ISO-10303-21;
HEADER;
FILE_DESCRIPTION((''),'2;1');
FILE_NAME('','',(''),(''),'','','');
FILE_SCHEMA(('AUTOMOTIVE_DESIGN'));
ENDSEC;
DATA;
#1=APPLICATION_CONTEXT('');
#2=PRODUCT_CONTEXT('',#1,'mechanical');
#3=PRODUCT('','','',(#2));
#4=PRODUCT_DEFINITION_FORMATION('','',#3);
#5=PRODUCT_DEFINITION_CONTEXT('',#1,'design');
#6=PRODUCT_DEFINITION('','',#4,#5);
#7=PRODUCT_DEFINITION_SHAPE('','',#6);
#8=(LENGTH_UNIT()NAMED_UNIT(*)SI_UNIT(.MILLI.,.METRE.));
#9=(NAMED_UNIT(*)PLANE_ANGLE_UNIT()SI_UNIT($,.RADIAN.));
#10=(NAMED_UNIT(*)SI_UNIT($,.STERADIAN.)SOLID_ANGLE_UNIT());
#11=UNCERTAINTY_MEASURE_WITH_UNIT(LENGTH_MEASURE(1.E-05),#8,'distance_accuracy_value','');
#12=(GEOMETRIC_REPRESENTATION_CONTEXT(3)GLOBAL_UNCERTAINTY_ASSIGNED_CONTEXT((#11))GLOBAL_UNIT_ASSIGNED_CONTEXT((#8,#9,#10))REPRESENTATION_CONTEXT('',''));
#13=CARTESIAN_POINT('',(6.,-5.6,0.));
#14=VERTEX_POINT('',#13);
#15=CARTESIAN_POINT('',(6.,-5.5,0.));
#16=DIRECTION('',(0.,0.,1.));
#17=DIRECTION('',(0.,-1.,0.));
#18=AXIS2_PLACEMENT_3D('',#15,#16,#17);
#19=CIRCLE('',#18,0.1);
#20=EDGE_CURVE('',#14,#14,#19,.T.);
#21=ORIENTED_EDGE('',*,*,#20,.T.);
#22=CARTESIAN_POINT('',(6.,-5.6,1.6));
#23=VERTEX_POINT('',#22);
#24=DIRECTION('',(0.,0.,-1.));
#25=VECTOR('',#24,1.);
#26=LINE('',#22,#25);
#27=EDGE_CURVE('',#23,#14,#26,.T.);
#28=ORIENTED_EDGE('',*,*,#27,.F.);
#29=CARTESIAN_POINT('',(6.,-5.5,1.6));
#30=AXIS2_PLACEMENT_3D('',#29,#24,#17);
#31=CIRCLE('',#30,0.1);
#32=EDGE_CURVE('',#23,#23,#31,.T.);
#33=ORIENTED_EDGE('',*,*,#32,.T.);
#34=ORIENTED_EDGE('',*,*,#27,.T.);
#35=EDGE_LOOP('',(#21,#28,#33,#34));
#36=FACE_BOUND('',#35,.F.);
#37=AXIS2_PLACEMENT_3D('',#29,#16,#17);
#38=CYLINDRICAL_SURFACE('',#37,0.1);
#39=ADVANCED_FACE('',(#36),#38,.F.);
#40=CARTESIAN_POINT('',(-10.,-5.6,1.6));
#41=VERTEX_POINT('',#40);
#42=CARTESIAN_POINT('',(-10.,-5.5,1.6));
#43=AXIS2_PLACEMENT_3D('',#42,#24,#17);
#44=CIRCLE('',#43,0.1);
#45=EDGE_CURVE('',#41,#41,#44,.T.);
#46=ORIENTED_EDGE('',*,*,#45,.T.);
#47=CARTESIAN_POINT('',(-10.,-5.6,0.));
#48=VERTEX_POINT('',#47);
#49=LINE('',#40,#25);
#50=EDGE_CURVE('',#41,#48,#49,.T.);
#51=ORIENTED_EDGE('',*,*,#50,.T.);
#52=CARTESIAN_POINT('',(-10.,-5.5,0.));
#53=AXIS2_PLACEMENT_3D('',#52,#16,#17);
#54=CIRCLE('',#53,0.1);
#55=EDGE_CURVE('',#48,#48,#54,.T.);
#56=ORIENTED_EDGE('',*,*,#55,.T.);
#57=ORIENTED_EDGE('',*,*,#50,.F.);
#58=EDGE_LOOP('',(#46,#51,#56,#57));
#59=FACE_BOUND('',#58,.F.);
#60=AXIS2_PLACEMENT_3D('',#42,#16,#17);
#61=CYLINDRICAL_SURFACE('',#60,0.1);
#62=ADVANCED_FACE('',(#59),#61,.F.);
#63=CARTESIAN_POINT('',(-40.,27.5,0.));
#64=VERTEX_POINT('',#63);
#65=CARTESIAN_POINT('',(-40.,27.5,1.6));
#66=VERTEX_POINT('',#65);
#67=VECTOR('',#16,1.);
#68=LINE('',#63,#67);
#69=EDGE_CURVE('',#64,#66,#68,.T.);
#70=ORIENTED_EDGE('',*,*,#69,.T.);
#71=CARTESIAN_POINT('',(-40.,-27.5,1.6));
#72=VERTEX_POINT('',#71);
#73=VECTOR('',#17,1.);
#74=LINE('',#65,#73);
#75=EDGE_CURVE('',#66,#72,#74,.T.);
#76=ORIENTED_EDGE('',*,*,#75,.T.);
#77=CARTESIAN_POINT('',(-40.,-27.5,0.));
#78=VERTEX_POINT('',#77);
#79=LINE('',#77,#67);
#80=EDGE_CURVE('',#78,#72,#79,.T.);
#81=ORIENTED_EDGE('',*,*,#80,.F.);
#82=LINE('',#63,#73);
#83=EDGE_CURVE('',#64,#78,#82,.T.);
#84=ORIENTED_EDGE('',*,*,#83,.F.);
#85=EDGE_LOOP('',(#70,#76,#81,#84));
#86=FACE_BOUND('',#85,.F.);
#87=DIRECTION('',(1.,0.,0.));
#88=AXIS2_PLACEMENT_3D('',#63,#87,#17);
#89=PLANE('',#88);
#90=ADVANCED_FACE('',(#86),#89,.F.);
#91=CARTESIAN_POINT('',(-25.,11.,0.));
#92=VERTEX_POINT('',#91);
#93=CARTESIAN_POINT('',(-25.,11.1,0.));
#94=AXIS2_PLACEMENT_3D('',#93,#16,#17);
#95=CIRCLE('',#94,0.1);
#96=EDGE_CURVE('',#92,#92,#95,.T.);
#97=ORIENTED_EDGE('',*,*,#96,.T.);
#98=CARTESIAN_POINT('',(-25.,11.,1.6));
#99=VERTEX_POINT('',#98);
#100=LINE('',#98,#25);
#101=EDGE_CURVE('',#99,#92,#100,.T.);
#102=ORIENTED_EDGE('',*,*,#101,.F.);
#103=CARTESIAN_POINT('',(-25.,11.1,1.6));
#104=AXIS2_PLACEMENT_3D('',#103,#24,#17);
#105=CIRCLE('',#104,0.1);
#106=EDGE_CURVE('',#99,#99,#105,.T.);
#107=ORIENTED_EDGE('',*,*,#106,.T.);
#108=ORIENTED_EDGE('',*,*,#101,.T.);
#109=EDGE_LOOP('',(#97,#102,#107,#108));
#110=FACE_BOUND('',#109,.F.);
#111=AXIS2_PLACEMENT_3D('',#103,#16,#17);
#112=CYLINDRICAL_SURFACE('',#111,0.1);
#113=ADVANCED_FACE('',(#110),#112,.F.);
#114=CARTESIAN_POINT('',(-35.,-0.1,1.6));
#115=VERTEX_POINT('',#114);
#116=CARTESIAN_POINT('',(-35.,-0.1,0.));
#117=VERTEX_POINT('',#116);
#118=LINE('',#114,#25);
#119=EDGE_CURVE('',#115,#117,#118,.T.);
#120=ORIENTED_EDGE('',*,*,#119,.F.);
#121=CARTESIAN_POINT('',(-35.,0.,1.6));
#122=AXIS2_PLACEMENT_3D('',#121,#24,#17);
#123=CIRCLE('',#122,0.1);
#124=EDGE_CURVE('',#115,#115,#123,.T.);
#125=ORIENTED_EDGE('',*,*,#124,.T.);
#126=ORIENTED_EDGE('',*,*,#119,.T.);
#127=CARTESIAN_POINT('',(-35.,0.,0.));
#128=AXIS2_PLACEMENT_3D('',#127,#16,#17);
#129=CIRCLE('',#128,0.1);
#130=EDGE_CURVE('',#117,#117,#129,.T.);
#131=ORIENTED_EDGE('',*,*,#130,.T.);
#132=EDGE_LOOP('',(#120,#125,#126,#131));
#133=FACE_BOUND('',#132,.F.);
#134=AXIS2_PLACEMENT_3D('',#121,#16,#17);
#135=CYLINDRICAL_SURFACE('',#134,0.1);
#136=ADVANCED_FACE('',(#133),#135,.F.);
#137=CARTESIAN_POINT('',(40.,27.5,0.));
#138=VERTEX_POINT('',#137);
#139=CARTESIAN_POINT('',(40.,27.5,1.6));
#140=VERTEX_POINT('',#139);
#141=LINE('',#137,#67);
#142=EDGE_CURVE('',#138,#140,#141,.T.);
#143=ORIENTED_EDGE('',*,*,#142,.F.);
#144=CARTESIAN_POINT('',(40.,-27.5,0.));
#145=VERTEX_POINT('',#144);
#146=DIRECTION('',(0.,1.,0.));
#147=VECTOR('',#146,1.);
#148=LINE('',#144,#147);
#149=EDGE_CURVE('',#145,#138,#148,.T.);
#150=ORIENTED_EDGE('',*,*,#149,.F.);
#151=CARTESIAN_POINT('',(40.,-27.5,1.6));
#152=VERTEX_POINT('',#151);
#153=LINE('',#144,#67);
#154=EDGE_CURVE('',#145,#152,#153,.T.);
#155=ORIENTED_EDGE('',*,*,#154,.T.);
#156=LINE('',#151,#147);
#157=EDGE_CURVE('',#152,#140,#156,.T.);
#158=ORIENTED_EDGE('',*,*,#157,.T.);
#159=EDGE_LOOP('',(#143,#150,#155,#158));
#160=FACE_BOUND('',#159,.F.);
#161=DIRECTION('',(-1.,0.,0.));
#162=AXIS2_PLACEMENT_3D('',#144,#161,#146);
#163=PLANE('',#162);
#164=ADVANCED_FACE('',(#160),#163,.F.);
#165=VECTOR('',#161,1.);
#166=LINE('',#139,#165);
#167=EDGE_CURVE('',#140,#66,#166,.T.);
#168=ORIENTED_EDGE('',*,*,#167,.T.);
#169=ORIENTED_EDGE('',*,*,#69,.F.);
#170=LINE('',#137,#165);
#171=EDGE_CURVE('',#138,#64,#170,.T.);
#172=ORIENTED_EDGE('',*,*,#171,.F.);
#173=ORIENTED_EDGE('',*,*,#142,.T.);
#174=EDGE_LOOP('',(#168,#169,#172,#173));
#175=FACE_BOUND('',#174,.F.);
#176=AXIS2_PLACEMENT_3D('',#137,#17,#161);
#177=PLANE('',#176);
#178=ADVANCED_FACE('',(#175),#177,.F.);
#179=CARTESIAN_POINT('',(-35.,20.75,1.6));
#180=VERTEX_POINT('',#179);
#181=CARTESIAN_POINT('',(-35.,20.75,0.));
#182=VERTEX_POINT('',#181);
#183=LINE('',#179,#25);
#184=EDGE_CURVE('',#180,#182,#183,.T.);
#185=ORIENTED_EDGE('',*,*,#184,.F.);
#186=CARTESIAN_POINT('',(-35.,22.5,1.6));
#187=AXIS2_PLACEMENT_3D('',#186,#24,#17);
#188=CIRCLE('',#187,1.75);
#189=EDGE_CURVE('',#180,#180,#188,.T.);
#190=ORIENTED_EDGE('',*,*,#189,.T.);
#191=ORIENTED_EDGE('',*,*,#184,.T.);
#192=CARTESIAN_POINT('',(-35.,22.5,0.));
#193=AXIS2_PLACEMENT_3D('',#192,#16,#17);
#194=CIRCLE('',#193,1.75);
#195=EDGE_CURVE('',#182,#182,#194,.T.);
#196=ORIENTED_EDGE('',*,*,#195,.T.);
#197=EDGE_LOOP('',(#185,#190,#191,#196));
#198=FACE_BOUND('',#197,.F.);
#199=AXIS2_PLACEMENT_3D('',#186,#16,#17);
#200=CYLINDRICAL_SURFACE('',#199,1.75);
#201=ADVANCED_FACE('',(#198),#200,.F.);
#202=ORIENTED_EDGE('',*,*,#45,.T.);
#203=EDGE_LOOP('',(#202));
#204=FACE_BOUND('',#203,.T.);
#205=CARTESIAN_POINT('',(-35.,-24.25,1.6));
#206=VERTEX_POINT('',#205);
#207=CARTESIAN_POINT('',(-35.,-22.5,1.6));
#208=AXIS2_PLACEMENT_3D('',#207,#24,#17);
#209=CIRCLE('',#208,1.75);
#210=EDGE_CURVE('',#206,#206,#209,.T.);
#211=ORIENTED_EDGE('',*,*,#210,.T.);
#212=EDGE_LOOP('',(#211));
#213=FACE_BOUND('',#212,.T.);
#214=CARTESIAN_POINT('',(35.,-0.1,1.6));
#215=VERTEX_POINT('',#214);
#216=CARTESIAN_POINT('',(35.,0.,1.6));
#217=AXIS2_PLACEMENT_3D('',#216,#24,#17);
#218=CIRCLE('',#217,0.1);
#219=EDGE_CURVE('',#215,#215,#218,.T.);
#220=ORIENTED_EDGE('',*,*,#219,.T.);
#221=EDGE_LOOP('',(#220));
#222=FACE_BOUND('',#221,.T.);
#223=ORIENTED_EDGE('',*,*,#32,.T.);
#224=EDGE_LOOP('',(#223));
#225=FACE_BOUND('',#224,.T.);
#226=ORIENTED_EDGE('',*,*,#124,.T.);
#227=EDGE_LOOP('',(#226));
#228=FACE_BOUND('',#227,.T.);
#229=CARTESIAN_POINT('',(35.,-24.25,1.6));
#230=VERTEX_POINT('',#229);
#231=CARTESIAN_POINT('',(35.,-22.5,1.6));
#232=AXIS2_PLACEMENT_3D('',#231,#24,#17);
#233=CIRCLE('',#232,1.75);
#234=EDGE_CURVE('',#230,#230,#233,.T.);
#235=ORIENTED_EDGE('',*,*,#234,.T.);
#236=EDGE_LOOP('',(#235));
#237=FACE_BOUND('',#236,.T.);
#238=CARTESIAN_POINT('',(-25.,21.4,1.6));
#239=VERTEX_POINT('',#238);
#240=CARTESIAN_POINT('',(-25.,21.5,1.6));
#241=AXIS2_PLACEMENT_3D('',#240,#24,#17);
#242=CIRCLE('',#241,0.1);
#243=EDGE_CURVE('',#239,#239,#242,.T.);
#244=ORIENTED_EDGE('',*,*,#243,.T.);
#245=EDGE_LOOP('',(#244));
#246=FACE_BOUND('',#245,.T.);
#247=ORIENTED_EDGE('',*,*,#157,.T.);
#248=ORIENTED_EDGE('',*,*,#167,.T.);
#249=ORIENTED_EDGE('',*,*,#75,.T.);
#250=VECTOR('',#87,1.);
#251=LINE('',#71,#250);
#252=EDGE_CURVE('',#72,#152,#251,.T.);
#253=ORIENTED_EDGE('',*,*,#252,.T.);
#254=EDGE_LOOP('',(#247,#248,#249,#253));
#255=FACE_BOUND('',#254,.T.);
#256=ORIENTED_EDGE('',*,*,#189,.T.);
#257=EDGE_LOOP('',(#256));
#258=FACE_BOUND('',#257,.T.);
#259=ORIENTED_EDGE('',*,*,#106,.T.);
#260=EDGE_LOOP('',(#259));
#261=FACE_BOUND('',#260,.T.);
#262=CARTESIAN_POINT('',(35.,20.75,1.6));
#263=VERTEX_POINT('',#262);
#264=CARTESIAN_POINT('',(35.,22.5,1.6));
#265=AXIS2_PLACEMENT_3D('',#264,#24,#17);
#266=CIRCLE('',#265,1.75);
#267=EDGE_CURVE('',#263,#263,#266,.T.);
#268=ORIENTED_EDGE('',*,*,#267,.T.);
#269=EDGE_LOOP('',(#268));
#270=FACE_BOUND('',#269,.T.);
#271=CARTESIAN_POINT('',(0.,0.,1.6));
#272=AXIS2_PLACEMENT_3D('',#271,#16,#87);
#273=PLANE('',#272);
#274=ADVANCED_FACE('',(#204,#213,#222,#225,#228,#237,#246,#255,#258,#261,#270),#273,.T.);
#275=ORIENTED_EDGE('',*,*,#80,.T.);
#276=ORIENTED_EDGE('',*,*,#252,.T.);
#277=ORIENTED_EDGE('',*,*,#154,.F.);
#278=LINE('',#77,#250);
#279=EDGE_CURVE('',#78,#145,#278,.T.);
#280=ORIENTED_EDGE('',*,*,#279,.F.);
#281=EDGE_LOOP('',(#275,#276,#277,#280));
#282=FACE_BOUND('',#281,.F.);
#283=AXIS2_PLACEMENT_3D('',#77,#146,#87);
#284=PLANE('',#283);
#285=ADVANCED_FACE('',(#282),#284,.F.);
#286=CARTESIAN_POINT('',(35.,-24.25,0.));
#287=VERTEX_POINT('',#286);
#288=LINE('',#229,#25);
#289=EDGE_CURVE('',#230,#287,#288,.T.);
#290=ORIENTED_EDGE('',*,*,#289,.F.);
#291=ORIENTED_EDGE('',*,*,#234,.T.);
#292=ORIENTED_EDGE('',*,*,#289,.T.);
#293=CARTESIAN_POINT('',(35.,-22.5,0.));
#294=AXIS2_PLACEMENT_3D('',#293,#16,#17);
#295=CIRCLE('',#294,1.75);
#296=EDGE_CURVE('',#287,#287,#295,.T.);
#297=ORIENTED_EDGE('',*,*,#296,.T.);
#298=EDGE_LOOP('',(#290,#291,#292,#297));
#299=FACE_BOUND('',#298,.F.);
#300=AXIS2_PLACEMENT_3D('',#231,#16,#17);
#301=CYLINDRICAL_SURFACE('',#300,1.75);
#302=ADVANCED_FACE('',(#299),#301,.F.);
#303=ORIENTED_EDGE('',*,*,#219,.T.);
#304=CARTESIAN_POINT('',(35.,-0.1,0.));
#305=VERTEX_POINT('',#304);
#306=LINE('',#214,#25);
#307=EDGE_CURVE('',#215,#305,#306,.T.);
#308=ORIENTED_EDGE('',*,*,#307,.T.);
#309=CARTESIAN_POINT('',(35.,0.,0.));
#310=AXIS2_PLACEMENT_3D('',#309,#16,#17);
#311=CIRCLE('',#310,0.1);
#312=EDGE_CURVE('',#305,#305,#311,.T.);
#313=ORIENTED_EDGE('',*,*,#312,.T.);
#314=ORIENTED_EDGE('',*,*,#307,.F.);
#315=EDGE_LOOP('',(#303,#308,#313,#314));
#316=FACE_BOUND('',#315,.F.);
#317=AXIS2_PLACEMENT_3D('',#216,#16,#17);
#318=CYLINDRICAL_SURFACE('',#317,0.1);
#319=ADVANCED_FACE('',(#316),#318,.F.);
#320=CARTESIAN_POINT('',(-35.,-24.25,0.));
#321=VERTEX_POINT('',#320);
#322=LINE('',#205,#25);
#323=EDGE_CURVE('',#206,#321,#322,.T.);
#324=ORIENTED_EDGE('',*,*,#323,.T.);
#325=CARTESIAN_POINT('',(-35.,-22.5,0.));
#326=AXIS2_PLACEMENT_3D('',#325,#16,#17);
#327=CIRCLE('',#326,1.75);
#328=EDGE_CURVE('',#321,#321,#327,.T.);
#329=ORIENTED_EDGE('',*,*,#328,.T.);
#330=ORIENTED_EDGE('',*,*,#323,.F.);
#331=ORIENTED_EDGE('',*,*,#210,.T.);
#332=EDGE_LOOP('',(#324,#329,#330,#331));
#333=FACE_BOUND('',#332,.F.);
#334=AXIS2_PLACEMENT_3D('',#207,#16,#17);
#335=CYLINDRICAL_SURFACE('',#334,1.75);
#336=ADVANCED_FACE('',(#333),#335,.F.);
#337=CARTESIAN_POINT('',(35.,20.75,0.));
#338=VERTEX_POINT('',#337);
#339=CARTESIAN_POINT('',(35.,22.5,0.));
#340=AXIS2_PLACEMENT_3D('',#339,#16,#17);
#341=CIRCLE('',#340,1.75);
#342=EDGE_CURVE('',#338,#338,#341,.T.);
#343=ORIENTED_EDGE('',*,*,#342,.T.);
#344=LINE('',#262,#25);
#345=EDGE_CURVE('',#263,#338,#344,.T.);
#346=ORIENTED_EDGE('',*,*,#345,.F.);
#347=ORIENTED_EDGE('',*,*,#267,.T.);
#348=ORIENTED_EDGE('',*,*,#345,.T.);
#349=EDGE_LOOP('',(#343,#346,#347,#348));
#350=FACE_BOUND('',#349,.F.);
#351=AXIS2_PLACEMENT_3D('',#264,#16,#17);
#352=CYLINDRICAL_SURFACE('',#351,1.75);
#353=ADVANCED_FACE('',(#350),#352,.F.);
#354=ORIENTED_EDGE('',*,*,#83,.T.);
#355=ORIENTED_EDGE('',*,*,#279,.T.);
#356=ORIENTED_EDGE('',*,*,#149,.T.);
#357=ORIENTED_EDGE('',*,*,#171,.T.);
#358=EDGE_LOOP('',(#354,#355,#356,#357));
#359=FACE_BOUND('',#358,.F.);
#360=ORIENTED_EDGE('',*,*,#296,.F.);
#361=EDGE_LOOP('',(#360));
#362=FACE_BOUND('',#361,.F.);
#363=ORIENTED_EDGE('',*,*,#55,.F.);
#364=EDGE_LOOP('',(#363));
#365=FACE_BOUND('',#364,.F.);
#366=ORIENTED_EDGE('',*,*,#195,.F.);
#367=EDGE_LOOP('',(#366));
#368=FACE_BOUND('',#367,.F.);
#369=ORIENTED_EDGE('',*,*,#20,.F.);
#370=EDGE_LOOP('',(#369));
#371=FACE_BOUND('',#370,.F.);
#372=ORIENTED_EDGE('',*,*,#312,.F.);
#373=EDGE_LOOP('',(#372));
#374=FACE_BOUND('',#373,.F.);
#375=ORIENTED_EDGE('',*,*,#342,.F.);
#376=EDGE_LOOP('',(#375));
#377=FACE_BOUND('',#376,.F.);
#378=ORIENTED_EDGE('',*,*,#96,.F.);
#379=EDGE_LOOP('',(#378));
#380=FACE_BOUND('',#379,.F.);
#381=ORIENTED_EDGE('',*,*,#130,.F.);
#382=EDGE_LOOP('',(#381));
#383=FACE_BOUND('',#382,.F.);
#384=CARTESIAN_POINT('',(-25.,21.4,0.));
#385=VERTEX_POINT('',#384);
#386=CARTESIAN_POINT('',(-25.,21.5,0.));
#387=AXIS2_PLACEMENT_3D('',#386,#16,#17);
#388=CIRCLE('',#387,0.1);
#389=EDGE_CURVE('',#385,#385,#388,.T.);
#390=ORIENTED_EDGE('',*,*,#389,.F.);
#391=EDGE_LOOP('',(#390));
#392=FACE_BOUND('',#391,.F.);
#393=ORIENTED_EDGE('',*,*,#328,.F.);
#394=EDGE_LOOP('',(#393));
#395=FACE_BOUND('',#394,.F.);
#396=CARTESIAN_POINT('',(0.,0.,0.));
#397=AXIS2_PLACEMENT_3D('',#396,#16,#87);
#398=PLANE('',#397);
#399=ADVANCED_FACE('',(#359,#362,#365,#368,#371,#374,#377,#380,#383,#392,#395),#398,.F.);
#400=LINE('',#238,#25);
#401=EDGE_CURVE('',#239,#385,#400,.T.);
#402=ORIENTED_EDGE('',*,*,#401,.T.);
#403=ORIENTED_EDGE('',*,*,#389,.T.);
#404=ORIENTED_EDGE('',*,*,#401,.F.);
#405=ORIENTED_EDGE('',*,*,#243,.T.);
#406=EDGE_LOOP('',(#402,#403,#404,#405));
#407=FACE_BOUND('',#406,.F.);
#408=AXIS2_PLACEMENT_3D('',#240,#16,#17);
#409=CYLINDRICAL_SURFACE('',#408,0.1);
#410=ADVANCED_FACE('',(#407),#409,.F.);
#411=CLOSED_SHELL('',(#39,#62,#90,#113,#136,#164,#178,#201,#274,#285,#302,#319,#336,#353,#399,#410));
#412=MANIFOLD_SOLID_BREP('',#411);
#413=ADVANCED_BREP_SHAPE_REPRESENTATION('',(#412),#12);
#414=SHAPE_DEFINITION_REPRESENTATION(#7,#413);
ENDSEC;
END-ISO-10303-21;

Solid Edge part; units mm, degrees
sketch "Sketch1" plane through (0, 0, 0) normal (0, 0, 1) x (1, 0, 0)
  line L0 (-40, -27.5) -> (40, -27.5)
  line L1 (40, -27.5) -> (40, 27.5)
  line L2 (40, 27.5) -> (-40, 27.5)
  line L3 (-40, 27.5) -> (-40, -27.5)
  dimension "D1" = 55
  dimension "D2" = 80
extrude "Protrusion1" add sketch "Sketch1" along normal blind 1.6
hole "Hole1" at (-25, 11.1, 1.6) direction (0, 0, -1) diameter 0.2 end through all
hole "Hole2" at (-25, 21.5, 1.6) direction (0, 0, -1) diameter 0.2 end through all
hole "Hole3" at (6, -5.5, 1.6) direction (0, 0, -1) diameter 0.2 end through all
hole "Hole4" at (-10, -5.5, 1.6) direction (0, 0, -1) diameter 0.2 end through all
hole "Hole5" at (35, 22.5, 1.6) direction (0, 0, -1) diameter 3.5 end through all
hole "Hole6" at (35, -22.5, 1.6) direction (0, 0, -1) diameter 3.5 end through all
hole "Hole7" at (-35, -22.5, 1.6) direction (0, 0, -1) diameter 3.5 end through all
hole "Hole8" at (-35, 22.5, 1.6) direction (0, 0, -1) diameter 3.5 end through all
hole "Hole9" at (-35, 0, 1.6) direction (0, 0, 1) diameter 0.2 end through all both ways yes
hole "Hole10" at (35, 0, 1.6) direction (0, 0, 1) diameter 0.2 end through all both ways yes
